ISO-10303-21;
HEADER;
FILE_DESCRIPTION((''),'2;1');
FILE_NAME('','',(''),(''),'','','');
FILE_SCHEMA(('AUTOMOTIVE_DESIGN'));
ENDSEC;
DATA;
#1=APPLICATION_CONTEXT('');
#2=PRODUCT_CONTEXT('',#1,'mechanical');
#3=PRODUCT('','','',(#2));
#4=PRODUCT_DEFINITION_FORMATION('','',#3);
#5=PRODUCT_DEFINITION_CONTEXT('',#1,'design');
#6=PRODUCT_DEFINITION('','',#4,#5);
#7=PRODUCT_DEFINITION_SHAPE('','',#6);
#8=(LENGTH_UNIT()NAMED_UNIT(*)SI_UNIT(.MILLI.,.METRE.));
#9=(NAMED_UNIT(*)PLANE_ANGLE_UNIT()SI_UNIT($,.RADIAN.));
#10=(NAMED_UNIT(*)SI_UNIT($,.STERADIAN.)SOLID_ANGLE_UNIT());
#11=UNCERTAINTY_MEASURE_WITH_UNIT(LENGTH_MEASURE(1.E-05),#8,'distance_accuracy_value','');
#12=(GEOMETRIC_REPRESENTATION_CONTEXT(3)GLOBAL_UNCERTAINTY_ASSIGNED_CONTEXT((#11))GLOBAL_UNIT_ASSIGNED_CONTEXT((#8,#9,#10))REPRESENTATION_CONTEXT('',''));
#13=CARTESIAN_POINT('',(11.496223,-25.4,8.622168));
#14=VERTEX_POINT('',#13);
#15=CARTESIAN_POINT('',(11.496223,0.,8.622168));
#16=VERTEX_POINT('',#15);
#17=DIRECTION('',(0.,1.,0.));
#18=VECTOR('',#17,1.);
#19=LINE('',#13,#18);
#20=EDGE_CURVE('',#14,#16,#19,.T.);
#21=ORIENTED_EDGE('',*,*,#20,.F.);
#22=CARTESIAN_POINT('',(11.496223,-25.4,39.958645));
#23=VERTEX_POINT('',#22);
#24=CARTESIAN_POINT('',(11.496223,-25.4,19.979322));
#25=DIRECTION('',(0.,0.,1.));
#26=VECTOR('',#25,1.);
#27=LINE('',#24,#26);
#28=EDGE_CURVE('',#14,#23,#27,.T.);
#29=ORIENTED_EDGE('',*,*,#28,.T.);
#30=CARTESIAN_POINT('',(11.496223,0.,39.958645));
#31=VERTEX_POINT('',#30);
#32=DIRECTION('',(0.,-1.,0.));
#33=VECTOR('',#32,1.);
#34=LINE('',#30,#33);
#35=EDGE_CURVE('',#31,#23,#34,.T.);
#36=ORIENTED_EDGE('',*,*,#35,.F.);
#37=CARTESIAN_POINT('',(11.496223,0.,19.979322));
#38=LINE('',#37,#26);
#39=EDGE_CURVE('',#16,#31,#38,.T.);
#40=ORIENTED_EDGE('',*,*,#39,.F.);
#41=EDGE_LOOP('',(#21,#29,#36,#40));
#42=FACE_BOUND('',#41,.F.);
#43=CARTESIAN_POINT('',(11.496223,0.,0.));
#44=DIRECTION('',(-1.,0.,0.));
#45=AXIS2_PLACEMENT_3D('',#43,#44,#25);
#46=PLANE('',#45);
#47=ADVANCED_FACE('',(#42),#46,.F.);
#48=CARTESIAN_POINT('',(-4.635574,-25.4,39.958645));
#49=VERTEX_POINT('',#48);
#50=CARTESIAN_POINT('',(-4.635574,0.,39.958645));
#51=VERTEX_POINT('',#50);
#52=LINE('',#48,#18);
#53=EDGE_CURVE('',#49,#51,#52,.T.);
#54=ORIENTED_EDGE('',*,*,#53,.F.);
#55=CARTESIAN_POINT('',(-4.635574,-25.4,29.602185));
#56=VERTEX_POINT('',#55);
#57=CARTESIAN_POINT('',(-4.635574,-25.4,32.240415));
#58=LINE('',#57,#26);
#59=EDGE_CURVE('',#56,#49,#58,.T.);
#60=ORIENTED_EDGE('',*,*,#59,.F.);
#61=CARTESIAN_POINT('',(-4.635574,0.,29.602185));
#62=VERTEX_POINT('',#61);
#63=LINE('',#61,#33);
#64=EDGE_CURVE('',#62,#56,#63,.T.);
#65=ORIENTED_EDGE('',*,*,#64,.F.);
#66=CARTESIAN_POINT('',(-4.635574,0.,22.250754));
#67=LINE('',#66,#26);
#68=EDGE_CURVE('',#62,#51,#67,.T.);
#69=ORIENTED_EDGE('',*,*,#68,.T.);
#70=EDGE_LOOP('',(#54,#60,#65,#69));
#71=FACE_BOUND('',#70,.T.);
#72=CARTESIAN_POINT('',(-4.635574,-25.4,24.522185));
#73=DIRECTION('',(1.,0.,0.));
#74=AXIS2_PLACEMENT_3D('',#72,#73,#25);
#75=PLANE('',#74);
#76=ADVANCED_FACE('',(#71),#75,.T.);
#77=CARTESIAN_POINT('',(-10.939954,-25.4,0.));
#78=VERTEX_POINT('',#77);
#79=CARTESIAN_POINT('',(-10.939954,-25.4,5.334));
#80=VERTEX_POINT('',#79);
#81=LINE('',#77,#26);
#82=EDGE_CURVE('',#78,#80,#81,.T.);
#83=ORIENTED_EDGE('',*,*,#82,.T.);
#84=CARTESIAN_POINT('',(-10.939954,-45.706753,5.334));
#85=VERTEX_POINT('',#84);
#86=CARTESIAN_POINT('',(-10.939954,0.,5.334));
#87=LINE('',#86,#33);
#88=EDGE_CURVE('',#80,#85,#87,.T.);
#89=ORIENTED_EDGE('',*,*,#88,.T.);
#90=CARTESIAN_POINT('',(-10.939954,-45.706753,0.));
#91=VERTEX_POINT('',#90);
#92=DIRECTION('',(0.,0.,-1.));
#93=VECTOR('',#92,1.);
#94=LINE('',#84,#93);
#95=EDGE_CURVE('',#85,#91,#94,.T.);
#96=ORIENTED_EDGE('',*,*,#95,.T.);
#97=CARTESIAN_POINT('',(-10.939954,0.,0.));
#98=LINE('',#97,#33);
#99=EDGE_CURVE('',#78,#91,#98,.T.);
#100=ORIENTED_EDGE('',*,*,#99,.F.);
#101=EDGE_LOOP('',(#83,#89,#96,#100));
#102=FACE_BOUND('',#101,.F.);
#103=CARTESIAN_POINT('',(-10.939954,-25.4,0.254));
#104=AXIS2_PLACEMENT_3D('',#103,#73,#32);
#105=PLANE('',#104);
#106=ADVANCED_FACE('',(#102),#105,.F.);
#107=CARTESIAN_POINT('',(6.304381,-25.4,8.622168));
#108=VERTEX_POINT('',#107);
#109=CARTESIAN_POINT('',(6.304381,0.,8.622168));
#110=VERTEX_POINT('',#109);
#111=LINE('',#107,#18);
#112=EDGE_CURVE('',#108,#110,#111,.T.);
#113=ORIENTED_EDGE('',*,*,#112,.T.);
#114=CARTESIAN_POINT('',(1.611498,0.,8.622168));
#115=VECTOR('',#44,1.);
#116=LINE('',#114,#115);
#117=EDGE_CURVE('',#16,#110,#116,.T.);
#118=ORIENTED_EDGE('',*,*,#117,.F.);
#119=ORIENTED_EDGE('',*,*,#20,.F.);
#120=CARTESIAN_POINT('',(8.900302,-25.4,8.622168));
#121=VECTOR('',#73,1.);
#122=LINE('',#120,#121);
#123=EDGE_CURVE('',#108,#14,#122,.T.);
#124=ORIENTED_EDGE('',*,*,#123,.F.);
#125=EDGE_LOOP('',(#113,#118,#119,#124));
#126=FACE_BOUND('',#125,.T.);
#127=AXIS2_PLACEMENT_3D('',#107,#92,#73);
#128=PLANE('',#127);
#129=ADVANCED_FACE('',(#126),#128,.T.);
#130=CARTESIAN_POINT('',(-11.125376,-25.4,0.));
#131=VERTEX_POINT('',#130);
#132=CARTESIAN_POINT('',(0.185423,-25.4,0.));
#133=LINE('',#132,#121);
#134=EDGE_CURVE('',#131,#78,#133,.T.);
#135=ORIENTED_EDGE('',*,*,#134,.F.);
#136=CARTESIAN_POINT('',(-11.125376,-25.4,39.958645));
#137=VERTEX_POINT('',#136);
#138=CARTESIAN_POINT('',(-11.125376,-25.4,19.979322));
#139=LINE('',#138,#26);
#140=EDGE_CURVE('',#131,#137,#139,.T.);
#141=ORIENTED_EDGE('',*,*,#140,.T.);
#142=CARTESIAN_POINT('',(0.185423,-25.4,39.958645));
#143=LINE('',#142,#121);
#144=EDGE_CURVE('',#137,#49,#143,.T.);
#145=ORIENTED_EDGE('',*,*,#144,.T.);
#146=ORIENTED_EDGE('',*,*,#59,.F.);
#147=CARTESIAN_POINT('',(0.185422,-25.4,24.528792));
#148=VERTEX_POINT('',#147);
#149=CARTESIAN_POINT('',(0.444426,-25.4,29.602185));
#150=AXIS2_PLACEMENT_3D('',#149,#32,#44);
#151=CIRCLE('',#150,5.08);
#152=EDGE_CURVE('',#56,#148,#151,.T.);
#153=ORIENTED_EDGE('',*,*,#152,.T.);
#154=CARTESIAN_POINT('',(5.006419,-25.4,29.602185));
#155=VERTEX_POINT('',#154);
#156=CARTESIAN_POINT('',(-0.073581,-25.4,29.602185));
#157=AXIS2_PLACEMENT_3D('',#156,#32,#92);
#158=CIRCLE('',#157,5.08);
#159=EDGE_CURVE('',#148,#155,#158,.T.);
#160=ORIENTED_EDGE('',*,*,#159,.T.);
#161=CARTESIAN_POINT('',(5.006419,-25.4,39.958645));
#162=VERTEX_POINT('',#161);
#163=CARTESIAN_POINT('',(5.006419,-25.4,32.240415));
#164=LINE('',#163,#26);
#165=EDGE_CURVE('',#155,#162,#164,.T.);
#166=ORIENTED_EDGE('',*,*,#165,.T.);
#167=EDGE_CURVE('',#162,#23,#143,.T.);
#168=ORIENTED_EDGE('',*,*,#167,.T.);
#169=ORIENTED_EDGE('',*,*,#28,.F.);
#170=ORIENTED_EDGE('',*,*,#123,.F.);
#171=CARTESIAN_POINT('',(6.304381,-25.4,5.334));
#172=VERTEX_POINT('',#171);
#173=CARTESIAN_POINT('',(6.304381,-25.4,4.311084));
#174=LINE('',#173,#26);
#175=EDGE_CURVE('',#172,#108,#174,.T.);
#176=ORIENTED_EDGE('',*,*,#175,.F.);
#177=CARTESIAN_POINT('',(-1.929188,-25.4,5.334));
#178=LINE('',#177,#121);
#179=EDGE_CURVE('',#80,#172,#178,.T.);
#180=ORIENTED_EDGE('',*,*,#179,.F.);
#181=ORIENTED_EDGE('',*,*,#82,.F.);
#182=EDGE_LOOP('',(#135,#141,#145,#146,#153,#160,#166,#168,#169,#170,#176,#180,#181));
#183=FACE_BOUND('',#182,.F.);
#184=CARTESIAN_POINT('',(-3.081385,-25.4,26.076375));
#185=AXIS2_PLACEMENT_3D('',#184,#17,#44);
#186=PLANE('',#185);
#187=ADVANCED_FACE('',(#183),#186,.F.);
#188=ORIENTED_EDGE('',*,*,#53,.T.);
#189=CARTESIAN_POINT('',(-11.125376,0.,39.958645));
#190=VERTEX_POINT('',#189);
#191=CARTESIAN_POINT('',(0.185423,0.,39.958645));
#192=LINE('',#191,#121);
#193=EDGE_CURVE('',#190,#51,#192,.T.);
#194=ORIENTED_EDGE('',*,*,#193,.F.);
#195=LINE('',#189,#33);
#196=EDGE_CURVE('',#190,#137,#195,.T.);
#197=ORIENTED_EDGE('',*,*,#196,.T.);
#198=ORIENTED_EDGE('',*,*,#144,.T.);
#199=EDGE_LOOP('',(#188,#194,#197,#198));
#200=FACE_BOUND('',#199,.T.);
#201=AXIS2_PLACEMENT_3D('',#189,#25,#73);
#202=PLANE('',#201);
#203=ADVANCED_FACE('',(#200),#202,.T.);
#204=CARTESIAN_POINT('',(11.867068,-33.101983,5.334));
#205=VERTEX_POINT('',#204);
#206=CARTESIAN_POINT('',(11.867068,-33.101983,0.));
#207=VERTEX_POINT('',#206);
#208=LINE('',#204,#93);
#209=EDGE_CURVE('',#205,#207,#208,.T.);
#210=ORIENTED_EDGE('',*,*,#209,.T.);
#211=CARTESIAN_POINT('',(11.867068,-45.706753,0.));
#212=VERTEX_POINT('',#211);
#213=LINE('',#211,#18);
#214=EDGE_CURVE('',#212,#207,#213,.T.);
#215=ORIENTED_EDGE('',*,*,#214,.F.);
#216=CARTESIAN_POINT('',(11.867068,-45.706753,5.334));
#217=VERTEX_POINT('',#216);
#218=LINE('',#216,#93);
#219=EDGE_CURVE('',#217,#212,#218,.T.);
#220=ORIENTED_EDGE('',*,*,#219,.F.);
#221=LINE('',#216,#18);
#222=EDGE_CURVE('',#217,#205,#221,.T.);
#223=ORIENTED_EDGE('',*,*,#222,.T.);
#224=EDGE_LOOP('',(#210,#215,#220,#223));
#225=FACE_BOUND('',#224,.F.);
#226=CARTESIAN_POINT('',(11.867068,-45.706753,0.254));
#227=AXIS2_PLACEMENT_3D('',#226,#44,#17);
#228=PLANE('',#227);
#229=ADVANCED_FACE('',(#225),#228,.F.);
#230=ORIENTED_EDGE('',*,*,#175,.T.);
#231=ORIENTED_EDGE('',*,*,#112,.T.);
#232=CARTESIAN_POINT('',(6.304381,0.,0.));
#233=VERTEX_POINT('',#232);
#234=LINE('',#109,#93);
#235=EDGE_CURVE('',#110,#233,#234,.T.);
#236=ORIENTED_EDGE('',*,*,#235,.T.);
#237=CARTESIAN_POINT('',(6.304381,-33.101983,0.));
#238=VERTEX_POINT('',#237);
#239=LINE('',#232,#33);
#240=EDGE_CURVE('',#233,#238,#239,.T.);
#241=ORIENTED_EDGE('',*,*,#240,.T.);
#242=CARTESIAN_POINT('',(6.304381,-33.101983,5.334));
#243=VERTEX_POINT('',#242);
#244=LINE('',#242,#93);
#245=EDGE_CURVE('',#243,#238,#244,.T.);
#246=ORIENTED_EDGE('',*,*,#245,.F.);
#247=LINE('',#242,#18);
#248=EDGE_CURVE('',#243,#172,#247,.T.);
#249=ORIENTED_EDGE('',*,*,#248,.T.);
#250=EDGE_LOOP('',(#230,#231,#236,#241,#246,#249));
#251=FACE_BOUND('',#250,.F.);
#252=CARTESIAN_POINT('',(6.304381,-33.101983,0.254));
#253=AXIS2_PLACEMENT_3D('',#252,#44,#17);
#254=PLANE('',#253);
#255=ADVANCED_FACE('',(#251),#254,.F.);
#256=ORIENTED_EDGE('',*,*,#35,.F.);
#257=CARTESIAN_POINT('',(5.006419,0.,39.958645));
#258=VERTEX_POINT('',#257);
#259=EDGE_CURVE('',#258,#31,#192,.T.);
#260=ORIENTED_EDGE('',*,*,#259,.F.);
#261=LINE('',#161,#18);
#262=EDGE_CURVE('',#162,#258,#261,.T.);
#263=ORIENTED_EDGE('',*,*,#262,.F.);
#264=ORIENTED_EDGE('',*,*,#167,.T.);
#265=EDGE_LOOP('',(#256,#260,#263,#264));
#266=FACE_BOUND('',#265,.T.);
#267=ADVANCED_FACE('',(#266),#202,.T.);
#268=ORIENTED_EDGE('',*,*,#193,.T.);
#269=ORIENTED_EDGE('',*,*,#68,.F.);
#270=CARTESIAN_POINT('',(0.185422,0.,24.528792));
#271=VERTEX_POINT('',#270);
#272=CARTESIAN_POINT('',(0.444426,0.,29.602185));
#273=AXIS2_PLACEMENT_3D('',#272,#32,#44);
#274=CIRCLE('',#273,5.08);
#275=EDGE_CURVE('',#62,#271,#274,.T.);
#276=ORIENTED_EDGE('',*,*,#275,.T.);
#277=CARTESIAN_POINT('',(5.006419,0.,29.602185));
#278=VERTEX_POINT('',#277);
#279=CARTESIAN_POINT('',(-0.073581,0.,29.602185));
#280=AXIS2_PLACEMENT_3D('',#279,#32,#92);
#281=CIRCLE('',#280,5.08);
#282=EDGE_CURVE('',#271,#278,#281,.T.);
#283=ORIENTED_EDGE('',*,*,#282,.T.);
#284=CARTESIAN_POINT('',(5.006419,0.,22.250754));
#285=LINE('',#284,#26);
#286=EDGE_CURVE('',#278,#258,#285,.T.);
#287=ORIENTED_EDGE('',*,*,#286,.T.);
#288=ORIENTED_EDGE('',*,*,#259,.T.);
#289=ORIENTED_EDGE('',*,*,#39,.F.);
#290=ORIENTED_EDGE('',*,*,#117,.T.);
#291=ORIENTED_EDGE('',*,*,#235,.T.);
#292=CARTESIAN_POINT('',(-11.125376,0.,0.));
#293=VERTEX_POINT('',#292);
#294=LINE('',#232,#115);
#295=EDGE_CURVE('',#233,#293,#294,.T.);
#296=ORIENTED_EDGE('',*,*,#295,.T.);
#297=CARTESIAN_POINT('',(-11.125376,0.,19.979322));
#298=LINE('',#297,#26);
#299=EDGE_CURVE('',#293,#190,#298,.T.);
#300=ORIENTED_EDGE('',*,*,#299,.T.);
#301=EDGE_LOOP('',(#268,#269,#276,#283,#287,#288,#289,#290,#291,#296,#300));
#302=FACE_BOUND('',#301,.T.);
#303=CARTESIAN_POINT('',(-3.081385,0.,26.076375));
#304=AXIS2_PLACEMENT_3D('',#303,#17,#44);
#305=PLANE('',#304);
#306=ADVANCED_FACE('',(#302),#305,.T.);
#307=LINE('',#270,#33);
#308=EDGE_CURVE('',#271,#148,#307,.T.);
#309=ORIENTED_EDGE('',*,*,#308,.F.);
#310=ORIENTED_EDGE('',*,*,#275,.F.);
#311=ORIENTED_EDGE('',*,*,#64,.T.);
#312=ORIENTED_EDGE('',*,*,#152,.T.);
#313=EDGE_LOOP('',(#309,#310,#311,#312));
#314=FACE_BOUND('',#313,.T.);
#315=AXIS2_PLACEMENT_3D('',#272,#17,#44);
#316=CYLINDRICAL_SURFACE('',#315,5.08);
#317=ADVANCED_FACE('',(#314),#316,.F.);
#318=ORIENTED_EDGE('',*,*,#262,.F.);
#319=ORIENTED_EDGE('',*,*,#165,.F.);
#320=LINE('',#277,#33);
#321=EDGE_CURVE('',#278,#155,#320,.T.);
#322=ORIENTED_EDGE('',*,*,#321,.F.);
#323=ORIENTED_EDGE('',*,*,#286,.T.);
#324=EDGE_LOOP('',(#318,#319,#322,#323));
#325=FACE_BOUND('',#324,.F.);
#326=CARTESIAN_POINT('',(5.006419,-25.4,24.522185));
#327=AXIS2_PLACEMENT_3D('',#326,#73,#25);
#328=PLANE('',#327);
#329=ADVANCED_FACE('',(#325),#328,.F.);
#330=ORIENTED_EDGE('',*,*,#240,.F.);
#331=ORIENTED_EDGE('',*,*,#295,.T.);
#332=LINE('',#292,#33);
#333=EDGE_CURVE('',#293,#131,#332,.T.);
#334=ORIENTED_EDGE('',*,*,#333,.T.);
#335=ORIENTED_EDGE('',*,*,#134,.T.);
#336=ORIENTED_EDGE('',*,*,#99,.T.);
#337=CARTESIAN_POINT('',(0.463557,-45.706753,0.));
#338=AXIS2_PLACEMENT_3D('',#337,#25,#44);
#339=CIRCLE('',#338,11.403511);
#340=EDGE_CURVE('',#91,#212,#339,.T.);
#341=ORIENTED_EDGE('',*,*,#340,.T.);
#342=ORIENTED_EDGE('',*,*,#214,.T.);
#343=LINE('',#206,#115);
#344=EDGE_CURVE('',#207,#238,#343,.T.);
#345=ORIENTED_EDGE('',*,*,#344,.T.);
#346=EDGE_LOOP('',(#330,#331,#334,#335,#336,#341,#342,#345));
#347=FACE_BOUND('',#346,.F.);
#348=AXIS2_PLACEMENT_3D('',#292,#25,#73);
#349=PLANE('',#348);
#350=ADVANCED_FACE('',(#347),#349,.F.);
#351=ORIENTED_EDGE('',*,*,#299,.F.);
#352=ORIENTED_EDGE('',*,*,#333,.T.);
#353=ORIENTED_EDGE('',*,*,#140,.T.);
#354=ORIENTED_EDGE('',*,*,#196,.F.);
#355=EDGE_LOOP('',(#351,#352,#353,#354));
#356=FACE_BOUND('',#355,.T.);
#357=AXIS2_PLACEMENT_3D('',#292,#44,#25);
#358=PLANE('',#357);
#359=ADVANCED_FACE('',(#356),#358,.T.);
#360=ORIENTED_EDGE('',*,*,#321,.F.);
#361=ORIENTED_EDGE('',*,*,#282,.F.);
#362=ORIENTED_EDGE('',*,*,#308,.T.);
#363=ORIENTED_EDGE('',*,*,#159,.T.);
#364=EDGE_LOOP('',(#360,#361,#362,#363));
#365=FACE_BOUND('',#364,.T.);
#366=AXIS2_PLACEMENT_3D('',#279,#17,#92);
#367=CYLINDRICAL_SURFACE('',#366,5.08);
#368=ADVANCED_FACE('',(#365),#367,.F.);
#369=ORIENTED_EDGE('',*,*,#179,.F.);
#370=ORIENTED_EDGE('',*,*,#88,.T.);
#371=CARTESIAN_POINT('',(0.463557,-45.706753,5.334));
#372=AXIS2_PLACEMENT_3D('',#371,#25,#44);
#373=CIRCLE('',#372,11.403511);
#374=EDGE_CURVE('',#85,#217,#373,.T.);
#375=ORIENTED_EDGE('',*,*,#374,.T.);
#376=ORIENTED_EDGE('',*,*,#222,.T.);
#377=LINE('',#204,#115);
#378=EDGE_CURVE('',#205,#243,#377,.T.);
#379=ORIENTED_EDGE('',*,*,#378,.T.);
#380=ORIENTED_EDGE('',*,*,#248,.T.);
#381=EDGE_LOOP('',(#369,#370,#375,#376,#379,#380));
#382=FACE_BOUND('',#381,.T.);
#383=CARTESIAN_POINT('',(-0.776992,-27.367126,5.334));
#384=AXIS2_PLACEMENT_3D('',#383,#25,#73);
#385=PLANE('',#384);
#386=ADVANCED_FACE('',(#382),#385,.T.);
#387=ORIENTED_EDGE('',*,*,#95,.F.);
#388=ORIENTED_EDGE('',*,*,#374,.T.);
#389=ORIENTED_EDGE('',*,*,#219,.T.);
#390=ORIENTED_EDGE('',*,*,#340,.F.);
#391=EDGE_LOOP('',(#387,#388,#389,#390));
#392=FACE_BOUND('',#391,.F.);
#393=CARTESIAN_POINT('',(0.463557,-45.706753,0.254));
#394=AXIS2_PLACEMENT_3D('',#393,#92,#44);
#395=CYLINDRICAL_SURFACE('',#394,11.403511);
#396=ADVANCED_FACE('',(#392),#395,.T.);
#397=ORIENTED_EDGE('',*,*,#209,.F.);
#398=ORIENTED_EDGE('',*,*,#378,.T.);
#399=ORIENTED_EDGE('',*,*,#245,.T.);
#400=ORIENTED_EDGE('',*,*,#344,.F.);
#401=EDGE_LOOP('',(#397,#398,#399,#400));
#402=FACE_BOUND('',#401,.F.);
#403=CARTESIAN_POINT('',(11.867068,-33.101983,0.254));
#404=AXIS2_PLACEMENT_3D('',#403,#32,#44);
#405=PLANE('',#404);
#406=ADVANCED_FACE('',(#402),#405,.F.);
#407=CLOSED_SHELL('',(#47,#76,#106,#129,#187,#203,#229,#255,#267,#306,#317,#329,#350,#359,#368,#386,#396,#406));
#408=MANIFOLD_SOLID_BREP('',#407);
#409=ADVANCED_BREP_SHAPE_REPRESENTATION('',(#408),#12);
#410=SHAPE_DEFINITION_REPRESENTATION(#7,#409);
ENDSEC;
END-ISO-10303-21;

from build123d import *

# Parameters (mm, degrees)
F0_W        = 22.621599026
F0_H        = 39.9586446583
F1_DEPTH    = 25.4
F2_W        = 9.6419928595
F2_H        = 15.4364593327
F3_DEPTH    = 25.401
F4_T1_DEPTH = 25.4
F5_W        = 5.1918416284
F5_H        = 8.622167632
F6_DEPTH    = 25.401
F8_DEPTH    = 0.254
F9_DEPTH    = 5.08


# Not quite as in the source:
# - a fillet or chamfer that OpenCascade refuses, or shapes differently, is made with other operations: its cross-section is extruded or revolved along the edge and cut away or added


with BuildPart() as f1:
    # F0 (on Front) → F1 (new body)
    with BuildSketch(Plane.XZ):
        with Locations((0.185423065, 19.9793223292)):
            Rectangle(F0_W, F0_H)
    extrude(amount=F1_DEPTH)

    # F2 (on face) → F3 (cut, through all)
    with BuildSketch(Plane.XZ.offset(25.4)):
        with Locations((0.1854221337, 32.240414992)):
            Rectangle(F2_W, F2_H)
    extrude(amount=-F3_DEPTH, mode=Mode.SUBTRACT)

    # F4: fillet of radius 5.08 on 2 edges, made by hand

    # F4_s2 → F4_t1 (join)
    with BuildSketch(Plane.XZ):
        with BuildLine():
            ThreePointArc((-4.6355742961, 29.6021853256), (-3.1476767445, 26.0100828772), (0.4444257039, 24.5221853256))
            Line((0.4444257039, 24.5221853256), (-4.6355742961, 24.5221853256))
            Line((-4.6355742961, 24.5221853256), (-4.6355742961, 29.6021853256))
        make_face()
        with BuildLine():
            ThreePointArc((-0.0735814366, 24.5221853256), (3.5185210119, 26.0100828772), (5.0064185634, 29.6021853256))
            Line((5.0064185634, 29.6021853256), (5.0064185634, 24.5221853256))
            Line((5.0064185634, 24.5221853256), (-0.0735814366, 24.5221853256))
        make_face()
    extrude(amount=F4_T1_DEPTH)

    # F5 (on face) → F6 (cut, through all)
    with BuildSketch(Plane.XZ.offset(25.4)):
        with Locations((8.9003017638, 4.311083816)):
            Rectangle(F5_W, F5_H)
    extrude(amount=-F6_DEPTH, mode=Mode.SUBTRACT)

    # F7 (on Top) → F8 (join)
    with BuildSketch(Plane.XY):
        with BuildLine():
            Line((6.3043809496, 0), (-10.9399538487, 0))
            Line((-10.9399538487, 0), (-10.9399538487, -45.7067526877))
            ThreePointArc((-10.9399538487, -45.7067526877), (0.463556964, -57.1102635004), (11.8670677766, -45.7067526877))
            Line((11.8670677766, -45.7067526877), (11.8670677766, -33.1019833684))
            Line((11.8670677766, -33.1019833684), (6.3043809496, -33.1019833684))
            Line((6.3043809496, -33.1019833684), (6.3043809496, -25.4))
            Line((6.3043809496, -25.4), (6.3043809496, 0))
        make_face()
    extrude(amount=F8_DEPTH)

    # F9 (add): a face of the model
    f9_faces = [f1.faces().sort_by_distance(p)[0] for p in [
        (-0.1279092973, -40.8893319154, 0.254),
    ]]
    extrude(f9_faces, amount=F9_DEPTH)


solid = f1.part
